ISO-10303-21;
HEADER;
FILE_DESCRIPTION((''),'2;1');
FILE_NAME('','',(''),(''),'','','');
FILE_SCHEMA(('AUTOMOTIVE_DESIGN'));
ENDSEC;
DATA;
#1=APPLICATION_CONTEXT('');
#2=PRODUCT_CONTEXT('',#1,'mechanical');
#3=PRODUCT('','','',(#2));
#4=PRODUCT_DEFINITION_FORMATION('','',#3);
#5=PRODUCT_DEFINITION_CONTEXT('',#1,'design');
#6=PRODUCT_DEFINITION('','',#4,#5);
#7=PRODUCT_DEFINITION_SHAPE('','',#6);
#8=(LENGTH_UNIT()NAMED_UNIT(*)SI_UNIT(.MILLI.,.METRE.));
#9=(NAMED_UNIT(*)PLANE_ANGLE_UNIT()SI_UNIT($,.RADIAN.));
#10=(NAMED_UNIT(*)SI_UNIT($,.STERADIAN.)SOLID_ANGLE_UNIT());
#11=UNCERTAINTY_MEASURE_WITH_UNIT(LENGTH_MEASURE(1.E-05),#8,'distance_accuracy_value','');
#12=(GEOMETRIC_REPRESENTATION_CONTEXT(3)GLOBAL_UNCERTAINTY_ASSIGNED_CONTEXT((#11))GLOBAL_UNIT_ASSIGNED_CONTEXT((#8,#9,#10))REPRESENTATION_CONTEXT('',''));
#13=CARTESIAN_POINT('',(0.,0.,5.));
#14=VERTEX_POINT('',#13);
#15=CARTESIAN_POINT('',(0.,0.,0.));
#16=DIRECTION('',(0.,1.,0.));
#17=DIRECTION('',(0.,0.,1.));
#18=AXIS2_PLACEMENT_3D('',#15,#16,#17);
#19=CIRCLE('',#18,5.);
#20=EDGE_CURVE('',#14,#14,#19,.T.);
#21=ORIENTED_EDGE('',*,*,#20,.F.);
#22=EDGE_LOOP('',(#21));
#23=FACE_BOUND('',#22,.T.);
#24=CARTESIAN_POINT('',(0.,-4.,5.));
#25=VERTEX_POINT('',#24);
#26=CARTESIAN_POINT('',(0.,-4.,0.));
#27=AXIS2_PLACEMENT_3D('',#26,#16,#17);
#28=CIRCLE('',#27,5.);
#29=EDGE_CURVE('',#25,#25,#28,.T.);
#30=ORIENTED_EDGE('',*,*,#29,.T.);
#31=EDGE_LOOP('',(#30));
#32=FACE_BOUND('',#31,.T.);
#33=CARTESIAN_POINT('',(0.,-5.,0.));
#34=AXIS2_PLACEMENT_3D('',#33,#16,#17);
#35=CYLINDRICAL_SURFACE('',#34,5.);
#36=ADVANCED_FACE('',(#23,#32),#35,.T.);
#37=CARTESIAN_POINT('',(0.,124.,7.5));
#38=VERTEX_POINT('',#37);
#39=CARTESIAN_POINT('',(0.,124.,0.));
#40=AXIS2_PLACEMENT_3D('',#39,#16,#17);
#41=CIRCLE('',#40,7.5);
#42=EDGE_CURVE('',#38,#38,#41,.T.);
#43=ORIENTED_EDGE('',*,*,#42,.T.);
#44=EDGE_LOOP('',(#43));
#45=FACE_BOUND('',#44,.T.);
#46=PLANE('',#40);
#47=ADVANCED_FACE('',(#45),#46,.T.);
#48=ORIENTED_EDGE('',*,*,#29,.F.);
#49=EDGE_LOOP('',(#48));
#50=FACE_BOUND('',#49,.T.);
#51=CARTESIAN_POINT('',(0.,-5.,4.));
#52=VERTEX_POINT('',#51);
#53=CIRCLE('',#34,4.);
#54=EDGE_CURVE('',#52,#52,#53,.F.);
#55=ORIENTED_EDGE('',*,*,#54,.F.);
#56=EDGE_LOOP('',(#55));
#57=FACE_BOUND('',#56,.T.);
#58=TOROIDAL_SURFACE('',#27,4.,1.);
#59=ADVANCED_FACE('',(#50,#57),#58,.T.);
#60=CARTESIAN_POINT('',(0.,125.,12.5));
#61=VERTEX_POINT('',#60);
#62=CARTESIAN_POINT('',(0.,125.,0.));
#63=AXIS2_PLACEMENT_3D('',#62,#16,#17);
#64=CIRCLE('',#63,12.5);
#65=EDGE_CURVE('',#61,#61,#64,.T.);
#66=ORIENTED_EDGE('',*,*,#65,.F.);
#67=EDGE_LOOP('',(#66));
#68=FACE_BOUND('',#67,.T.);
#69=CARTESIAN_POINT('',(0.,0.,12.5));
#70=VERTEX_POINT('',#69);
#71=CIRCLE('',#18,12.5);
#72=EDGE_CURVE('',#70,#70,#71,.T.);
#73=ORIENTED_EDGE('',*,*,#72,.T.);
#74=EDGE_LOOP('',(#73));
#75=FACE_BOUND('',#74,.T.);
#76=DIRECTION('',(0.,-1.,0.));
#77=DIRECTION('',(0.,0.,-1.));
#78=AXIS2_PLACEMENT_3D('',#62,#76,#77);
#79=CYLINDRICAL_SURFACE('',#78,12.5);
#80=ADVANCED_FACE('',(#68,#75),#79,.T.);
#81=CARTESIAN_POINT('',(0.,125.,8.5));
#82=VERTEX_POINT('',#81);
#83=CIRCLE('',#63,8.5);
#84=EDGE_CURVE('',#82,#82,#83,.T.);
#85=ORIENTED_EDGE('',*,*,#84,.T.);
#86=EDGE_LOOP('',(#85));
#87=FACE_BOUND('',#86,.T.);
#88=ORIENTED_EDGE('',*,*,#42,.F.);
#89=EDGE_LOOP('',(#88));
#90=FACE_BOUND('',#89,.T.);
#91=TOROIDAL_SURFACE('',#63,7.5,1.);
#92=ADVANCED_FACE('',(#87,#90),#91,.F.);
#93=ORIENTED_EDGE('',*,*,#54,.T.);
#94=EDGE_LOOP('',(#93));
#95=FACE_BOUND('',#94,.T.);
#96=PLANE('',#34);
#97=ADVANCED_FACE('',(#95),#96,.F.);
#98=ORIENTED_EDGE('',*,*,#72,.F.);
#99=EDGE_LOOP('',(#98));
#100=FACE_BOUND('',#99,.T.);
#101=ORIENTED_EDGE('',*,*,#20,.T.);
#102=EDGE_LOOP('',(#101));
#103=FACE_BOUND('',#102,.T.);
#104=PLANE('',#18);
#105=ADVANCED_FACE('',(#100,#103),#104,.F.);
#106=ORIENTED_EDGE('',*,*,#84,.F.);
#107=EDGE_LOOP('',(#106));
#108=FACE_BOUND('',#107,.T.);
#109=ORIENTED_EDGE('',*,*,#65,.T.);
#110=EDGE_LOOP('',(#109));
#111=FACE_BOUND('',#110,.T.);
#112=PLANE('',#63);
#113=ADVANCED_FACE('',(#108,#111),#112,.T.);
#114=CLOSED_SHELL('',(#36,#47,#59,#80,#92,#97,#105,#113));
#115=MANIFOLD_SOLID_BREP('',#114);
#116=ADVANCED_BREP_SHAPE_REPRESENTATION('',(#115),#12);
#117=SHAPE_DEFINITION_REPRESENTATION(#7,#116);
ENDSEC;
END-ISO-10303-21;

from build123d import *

# Parameters (mm, degrees)
SKETCH_1_R          = 12.5
EXTRUDE_1_DEPTH     = 125
SKETCH_2_R          = 5
EXTRUDE_2_DEPTH     = 5
FILLET_1_R          = 1
SKETCH_3_R          = 8.5
CUT_EXTRUDE_1_DEPTH = 1
FILLET_2_R          = 1


with BuildPart() as part:
    # 草图1 → 凸台-拉伸1 (new body)
    with BuildSketch(Plane(origin=(0, 0, 0), x_dir=(1, 0, 0), z_dir=(0, 1, 0))):
        with Locations(Location((0, 0, 0), (0, 0, 270))):
            Circle(SKETCH_1_R)
    extrude(amount=EXTRUDE_1_DEPTH)

    # 草图2 → 凸台-拉伸2 (add)
    with BuildSketch(Plane(origin=(0, 0, 0), x_dir=(1, 0, 0), z_dir=(0, 1, 0))):
        with Locations(Location((0, 0, 0), (0, 0, 270))):
            Circle(SKETCH_2_R)
    extrude(amount=-EXTRUDE_2_DEPTH)

    # 圆角1
    fillet_1_edges = [part.edges().sort_by_distance(p)[0] for p in [
        (0, -5, -5),
    ]]
    fillet(fillet_1_edges, radius=FILLET_1_R)

    # 草图3 → 切除-拉伸1 (cut)
    with BuildSketch(Plane(origin=(0, 125, 0), x_dir=(1, 0, 0), z_dir=(0, 1, 0))):
        with Locations(Location((0, 0, 0), (0, 0, 270))):
            Circle(SKETCH_3_R)
    extrude(amount=-CUT_EXTRUDE_1_DEPTH, mode=Mode.SUBTRACT)

    # 圆角2
    fillet_2_edges = [part.edges().sort_by_distance(p)[0] for p in [
        (0, 124, -8.5),
    ]]
    fillet(fillet_2_edges, radius=FILLET_2_R - 0.0001)  # a hair under: the kernel refuses the full size


solid = part.part
